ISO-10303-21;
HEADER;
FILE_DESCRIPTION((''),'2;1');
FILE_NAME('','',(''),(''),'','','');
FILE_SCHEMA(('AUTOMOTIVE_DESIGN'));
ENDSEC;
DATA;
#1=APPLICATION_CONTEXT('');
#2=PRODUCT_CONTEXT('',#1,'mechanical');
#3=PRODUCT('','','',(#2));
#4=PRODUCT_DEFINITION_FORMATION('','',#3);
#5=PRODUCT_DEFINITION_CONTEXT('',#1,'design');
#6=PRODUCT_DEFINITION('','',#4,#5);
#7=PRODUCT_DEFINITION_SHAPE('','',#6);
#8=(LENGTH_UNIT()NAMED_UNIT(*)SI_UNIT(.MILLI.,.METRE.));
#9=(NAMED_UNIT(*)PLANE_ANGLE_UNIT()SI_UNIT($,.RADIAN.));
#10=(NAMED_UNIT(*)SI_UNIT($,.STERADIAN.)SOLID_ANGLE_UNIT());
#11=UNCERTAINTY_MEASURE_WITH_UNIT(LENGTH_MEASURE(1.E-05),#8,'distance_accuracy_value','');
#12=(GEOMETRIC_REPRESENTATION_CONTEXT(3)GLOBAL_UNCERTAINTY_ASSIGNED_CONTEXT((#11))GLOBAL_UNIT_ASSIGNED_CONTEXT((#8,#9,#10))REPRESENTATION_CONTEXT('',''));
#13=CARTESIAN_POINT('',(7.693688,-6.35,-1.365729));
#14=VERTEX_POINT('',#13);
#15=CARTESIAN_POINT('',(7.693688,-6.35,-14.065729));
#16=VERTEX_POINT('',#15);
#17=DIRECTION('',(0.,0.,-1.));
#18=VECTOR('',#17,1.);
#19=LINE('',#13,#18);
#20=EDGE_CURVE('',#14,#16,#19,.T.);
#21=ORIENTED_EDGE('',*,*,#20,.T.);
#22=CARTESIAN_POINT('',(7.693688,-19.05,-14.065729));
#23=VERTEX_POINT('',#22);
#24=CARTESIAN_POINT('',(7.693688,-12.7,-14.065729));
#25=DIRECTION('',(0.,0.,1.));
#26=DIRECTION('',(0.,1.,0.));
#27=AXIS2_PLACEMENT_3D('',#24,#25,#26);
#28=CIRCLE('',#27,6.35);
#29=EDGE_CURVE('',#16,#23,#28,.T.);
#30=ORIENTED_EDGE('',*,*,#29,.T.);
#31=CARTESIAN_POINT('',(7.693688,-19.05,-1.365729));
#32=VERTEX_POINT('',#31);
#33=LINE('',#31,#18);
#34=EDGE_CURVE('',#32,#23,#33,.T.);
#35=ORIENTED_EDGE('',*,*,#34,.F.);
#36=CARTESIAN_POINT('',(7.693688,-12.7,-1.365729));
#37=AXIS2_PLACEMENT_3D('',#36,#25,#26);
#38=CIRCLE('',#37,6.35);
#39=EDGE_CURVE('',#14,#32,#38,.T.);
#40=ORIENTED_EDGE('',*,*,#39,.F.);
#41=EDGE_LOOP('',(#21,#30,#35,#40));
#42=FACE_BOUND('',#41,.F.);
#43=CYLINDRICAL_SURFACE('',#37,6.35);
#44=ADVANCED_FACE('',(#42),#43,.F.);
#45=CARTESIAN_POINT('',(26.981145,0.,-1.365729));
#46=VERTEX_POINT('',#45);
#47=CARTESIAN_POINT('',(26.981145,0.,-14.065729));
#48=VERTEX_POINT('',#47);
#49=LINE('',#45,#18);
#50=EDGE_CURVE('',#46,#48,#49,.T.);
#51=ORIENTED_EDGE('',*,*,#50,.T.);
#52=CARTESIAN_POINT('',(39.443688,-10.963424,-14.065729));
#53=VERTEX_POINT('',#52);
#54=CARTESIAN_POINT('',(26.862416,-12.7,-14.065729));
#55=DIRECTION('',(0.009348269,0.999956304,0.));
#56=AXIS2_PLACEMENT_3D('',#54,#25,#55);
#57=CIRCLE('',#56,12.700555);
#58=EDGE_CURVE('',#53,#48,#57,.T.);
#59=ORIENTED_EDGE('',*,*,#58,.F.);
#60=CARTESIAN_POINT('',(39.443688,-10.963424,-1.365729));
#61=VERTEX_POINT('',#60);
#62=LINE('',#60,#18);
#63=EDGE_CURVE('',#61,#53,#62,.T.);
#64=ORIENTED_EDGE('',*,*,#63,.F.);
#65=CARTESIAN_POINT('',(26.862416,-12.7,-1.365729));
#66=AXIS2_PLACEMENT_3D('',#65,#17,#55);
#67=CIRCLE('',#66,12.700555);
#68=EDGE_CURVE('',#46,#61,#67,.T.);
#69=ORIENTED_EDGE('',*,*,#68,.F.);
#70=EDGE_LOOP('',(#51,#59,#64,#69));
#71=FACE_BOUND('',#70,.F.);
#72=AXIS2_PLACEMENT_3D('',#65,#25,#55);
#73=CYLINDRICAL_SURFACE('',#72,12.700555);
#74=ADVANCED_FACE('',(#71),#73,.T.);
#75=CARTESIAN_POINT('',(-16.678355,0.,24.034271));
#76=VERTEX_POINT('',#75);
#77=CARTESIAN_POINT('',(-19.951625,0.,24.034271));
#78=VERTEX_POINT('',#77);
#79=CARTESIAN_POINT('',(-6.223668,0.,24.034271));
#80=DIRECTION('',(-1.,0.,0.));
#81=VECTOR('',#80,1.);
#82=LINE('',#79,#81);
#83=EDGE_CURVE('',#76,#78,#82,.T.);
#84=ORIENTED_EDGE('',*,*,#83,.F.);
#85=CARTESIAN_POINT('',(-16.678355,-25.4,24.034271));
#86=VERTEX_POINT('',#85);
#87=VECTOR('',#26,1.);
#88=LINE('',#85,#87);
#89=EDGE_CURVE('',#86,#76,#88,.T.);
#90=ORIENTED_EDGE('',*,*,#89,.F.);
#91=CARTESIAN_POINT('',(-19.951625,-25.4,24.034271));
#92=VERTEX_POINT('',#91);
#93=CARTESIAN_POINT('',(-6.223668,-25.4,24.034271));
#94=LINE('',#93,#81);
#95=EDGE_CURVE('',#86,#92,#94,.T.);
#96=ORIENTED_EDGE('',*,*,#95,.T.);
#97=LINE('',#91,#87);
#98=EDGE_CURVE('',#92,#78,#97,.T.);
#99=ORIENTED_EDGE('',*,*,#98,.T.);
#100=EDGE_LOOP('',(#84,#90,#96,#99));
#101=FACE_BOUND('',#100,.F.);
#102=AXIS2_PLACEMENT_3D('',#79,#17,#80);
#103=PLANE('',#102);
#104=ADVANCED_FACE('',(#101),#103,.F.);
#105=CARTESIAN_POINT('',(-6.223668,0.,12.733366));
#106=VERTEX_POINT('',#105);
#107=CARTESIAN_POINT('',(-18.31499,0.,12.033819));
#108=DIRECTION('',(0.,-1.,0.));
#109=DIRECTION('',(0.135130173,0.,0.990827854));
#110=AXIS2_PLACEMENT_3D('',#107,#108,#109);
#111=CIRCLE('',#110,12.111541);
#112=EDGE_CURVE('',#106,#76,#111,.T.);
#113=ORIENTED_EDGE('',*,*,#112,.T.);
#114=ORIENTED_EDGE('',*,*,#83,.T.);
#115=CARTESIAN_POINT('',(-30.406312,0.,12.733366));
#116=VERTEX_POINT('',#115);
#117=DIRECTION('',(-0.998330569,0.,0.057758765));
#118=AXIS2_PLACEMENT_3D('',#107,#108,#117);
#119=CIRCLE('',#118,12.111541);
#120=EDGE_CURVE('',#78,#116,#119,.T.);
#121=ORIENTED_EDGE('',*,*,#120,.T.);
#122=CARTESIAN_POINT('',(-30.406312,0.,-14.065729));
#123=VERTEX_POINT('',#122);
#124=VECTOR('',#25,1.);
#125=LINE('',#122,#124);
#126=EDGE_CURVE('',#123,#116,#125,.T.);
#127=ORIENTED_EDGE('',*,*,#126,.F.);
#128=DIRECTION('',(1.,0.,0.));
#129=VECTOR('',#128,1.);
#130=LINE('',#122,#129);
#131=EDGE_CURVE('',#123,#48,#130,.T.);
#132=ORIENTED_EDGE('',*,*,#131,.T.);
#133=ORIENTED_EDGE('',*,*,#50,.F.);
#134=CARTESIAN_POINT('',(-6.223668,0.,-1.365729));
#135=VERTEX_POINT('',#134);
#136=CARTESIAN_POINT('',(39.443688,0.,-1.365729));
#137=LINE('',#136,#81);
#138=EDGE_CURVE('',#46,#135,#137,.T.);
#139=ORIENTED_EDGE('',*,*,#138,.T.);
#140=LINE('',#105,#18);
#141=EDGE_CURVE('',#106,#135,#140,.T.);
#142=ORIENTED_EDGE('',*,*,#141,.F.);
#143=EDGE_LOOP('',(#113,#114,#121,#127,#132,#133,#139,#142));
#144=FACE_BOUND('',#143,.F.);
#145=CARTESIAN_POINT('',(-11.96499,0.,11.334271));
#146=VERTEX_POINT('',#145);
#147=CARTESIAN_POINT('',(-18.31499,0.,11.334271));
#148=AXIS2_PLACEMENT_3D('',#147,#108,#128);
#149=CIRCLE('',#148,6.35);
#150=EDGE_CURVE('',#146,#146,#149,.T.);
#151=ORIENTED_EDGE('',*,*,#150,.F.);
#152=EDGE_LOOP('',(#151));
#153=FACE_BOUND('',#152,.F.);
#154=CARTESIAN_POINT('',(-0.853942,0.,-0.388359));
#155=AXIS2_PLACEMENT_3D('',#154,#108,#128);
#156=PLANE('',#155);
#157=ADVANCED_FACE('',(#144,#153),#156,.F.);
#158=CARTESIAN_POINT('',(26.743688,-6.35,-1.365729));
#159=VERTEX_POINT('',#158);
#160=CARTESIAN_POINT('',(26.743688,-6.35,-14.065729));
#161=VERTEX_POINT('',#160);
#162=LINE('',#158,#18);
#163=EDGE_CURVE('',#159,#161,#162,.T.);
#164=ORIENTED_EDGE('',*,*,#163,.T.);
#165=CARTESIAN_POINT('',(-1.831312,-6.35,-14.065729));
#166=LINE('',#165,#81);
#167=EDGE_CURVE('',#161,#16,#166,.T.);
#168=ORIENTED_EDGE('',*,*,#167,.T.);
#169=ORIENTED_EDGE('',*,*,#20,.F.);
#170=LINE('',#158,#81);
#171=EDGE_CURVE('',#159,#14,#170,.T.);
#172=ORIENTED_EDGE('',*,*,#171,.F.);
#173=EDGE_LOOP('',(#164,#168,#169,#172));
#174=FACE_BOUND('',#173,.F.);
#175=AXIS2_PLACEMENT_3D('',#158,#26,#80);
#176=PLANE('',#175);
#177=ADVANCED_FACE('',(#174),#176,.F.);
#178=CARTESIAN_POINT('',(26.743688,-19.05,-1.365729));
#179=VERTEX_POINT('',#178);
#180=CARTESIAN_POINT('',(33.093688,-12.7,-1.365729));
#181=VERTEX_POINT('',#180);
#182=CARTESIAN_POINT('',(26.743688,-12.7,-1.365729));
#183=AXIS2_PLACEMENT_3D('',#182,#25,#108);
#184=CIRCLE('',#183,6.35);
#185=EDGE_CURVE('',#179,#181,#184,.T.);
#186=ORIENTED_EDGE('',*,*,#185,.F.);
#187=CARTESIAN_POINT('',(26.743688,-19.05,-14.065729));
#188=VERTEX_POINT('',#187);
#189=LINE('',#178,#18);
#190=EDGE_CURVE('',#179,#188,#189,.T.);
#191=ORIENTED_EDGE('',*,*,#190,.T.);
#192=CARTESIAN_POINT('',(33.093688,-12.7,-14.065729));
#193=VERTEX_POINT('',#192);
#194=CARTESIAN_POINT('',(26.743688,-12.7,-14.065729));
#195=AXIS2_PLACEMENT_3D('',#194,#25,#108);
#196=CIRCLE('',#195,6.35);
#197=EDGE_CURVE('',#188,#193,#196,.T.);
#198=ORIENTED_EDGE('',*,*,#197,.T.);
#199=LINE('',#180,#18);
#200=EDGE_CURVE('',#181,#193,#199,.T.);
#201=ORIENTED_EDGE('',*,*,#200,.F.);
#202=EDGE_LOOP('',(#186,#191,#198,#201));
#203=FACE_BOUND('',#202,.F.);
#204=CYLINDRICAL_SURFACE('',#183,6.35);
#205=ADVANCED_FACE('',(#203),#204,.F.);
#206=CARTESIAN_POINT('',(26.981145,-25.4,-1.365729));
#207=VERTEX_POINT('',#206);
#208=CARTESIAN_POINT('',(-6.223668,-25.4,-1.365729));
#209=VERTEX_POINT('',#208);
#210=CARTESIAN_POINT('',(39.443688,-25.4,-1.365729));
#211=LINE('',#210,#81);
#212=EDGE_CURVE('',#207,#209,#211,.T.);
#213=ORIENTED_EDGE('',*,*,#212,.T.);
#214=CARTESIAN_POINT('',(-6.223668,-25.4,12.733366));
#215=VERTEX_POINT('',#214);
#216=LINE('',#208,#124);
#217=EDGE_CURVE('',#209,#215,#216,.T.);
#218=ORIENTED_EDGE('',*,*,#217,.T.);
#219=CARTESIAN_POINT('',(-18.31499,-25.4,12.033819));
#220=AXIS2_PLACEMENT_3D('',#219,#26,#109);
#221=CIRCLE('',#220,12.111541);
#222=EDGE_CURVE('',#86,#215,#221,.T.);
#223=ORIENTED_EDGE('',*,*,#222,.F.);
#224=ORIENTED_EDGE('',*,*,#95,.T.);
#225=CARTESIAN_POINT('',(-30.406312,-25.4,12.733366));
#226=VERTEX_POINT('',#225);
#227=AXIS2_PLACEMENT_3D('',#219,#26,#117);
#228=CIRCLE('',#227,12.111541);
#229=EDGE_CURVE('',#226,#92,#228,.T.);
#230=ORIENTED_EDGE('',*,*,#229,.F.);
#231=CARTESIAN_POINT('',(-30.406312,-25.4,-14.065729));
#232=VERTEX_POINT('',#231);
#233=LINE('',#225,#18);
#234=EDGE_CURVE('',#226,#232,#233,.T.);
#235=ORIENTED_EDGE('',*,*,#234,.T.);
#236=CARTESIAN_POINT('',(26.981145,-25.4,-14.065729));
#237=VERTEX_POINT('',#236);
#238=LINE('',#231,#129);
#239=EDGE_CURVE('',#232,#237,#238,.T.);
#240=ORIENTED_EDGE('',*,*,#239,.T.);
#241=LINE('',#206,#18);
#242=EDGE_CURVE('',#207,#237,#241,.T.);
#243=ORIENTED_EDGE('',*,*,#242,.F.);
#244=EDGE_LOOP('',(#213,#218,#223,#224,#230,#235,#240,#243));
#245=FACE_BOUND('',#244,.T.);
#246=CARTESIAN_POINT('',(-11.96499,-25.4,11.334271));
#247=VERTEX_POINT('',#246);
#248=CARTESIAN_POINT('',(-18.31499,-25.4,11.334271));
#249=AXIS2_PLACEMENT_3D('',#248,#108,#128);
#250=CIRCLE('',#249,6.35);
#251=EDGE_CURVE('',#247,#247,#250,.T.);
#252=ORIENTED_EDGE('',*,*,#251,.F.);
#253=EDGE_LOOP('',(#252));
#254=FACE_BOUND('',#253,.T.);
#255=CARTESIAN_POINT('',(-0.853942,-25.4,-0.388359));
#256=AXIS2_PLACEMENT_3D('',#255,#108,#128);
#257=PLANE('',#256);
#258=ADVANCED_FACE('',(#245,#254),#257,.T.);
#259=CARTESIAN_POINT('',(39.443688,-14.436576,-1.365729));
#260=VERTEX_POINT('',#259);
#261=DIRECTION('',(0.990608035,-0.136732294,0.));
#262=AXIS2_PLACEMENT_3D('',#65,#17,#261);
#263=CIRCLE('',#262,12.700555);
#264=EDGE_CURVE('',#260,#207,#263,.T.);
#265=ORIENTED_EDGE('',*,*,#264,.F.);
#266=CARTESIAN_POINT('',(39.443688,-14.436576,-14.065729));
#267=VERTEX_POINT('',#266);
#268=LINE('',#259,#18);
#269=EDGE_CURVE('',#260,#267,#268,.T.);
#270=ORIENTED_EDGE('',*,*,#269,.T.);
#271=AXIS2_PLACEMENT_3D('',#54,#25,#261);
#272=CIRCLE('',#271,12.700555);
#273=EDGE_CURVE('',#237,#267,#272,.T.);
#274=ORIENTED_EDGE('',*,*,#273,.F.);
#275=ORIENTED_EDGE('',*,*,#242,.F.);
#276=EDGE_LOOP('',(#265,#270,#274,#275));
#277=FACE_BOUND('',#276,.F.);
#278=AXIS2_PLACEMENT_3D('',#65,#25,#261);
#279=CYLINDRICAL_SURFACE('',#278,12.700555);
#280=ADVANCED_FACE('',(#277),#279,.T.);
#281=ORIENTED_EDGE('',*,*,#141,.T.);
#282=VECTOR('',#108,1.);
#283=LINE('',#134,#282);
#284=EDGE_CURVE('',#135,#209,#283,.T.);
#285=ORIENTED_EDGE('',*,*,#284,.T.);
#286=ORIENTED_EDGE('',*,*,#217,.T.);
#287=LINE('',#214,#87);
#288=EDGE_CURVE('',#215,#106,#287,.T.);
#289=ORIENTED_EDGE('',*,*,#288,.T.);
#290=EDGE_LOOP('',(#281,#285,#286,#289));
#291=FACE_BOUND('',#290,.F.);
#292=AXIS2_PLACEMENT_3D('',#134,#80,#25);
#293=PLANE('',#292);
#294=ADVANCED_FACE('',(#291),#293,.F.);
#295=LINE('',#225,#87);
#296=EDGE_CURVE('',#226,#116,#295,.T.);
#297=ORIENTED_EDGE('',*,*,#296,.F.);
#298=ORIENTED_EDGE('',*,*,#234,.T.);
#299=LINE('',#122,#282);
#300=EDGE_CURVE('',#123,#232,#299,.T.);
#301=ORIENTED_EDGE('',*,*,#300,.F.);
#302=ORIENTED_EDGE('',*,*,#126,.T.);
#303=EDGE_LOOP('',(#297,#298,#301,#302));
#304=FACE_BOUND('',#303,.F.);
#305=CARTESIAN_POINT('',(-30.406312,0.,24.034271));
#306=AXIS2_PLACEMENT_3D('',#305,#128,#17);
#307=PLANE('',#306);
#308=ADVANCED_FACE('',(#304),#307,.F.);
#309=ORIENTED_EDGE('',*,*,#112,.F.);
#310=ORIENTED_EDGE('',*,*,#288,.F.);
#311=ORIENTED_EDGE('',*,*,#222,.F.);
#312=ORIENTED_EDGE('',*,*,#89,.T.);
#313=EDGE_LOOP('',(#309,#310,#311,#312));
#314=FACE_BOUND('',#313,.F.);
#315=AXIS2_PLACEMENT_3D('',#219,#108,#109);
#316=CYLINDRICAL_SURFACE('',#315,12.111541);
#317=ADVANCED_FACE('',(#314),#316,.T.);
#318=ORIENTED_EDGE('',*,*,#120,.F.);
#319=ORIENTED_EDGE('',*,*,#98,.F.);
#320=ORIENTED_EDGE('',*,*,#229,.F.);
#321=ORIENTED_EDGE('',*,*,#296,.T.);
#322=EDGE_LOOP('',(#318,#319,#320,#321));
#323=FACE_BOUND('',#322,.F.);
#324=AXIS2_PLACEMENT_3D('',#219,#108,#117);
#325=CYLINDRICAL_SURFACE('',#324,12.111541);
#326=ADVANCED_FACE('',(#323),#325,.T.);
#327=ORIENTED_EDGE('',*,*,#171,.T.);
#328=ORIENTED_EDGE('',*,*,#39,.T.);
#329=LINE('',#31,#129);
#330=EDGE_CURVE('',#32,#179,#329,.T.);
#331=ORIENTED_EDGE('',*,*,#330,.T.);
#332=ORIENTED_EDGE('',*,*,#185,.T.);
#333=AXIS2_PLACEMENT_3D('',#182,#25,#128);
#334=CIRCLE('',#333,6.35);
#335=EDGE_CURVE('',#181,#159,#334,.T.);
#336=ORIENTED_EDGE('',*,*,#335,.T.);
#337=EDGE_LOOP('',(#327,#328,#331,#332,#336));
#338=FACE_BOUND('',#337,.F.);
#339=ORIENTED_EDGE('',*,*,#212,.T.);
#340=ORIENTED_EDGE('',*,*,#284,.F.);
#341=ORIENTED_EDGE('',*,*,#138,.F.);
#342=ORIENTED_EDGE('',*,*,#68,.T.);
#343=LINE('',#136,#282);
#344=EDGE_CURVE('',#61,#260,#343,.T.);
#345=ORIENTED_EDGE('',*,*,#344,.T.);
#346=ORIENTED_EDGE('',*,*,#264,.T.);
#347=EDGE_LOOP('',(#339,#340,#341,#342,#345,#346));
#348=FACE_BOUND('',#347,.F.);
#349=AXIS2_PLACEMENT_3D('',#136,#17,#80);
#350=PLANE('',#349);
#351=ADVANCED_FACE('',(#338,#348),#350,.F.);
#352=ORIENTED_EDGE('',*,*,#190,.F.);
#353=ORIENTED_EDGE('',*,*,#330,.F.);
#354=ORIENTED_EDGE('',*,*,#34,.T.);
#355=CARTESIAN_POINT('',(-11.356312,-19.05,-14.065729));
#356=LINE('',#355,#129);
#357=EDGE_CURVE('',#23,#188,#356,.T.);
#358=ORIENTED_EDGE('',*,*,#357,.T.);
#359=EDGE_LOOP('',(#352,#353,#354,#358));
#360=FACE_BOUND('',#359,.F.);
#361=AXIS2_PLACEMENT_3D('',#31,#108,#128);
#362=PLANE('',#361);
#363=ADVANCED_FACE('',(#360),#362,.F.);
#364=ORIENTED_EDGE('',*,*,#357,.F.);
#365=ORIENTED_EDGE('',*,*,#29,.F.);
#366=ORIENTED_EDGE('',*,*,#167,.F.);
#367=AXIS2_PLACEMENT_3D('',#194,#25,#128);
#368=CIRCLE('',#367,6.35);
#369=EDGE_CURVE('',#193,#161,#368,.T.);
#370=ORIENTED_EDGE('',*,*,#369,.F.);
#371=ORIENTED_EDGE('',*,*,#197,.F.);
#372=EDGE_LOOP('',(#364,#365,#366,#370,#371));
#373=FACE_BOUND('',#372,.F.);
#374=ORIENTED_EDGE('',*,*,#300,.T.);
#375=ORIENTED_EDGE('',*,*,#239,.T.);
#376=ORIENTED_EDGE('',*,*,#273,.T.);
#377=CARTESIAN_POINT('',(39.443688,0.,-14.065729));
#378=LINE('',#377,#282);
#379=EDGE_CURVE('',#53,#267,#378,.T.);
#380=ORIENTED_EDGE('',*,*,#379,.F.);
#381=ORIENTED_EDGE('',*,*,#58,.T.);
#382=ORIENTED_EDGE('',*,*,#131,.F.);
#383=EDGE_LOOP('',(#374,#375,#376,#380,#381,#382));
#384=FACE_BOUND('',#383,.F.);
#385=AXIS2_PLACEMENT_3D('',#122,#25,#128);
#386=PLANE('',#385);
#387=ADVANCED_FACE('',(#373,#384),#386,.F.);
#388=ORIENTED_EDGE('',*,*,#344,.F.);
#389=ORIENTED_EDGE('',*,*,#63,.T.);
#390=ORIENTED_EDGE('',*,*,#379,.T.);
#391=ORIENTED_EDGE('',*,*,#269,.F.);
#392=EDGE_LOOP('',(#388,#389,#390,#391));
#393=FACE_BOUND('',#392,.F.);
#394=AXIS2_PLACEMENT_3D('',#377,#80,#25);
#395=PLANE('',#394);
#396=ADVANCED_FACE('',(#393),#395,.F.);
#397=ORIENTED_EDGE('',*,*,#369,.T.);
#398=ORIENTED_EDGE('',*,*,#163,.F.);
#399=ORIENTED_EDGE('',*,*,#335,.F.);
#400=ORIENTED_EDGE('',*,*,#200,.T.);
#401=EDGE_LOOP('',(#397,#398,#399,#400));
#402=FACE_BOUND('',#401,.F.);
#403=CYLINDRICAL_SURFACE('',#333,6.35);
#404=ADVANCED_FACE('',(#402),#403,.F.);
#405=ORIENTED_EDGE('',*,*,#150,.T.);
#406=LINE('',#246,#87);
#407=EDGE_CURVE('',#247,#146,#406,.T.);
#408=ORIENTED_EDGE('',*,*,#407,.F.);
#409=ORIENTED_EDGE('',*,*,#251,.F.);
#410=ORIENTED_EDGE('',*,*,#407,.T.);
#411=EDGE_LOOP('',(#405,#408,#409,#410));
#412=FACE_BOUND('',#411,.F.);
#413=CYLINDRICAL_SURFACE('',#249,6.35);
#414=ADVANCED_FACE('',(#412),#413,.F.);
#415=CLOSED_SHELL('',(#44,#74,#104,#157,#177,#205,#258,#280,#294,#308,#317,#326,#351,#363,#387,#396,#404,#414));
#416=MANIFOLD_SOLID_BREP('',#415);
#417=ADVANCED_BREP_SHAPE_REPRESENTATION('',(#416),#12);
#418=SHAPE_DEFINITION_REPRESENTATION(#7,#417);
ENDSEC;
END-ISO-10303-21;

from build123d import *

# Parameters (mm, degrees)
F1_DEPTH = 25.4
F3_DEPTH = 25.401
F5_DEPTH = 12.701


with BuildPart() as f1:
    # F0 (on Front) → F1 (new body)
    with BuildSketch(Plane.XZ):
        Polygon((-6.2236683385, 24.0342710525), (-30.4063118957, 24.0342710525), (-30.4063118957, -14.0657289475), (39.4436881043, -14.0657289475), (39.4436881043, -1.3657289475), (-6.2236683385, -1.3657289475), align=None)
    extrude(amount=F1_DEPTH)

    # F2 (on face) → F3 (cut, through all)
    with BuildSketch(Plane.XZ.offset(25.4)):
        with BuildLine():
            ThreePointArc((-24.6649901171, 11.3342710525), (-18.3149901171, 4.9842710525), (-11.9649901171, 11.3342710525))
            Line((-11.9649901171, 11.3342710525), (-24.6649901171, 11.3342710525))
        make_face()
        with BuildLine():
            Line((-24.6649901171, 11.3342710525), (-11.9649901171, 11.3342710525))
            ThreePointArc((-11.9649901171, 11.3342710525), (-18.3149901171, 17.6842710525), (-24.6649901171, 11.3342710525))
        make_face()
        with BuildLine():
            Line((-6.2236683385, 12.7333663785), (-6.2236683385, 11.3342710525))
            ThreePointArc((-6.2236683385, 11.3342710525), (-6.2034489564, 12.0338187155), (-6.2236683385, 12.7333663785))
        make_face()
        with BuildLine():
            ThreePointArc((-16.678355462, 24.0342710525), (-9.4244440948, 20.258636082), (-6.2236683385, 12.7333663785))
            Line((-6.2236683385, 12.7333663785), (-6.2236683385, 24.0342710525))
            Line((-6.2236683385, 24.0342710525), (-16.678355462, 24.0342710525))
        make_face()
        with BuildLine():
            ThreePointArc((-30.4063118957, 12.7333663785), (-30.4265312777, 12.0338187155), (-30.4063118957, 11.3342710525))
            Line((-30.4063118957, 11.3342710525), (-30.4063118957, 12.7333663785))
        make_face()
        with BuildLine():
            Line((-19.9516247721, 24.0342710525), (-16.678355462, 24.0342710525))
            ThreePointArc((-16.678355462, 24.0342710525), (-18.3149901171, 24.1453598762), (-19.9516247721, 24.0342710525))
        make_face()
        with BuildLine():
            Line((-30.4063118957, 24.0342710525), (-30.4063118957, 12.7333663785))
            ThreePointArc((-30.4063118957, 12.7333663785), (-27.2055361393, 20.258636082), (-19.9516247721, 24.0342710525))
            Line((-19.9516247721, 24.0342710525), (-30.4063118957, 24.0342710525))
        make_face()
    extrude(amount=-F3_DEPTH, mode=Mode.SUBTRACT)

    # F4 (on face) → F5 (cut, through all)
    with BuildSketch(Plane.XY.offset(-1.3657289475)):
        with BuildLine():
            ThreePointArc((33.0936881043, -12.7), (31.2338161649, -8.2098719395), (26.7436881043, -6.35))
            Line((26.7436881043, -6.35), (26.7436881043, -19.05))
            ThreePointArc((26.7436881043, -19.05), (31.2338161649, -17.1901280605), (33.0936881043, -12.7))
        make_face()
        with BuildLine():
            Line((26.7436881043, -19.05), (26.7436881043, -6.35))
            ThreePointArc((26.7436881043, -6.35), (20.3936881043, -12.7), (26.7436881043, -19.05))
        make_face()
        with BuildLine():
            ThreePointArc((26.7436881043, -19.05), (20.3936881043, -12.7), (26.7436881043, -6.35))
            Line((26.7436881043, -6.35), (7.6936881043, -6.35))
            ThreePointArc((7.6936881043, -6.35), (12.1838161649, -8.2098719395), (14.0436881043, -12.7))
            ThreePointArc((14.0436881043, -12.7), (12.1838161649, -17.1901280605), (7.6936881043, -19.05))
            Line((7.6936881043, -19.05), (26.7436881043, -19.05))
        make_face()
        with BuildLine():
            Line((39.4436881043, 0), (26.981144502, 0))
            ThreePointArc((26.981144502, 0), (35.251198478, -3.1641502734), (39.4436881043, -10.9634239866))
            Line((39.4436881043, -10.9634239866), (39.4436881043, 0))
        make_face()
        with BuildLine():
            ThreePointArc((14.0436881043, -12.7), (12.1838161649, -8.2098719395), (7.6936881043, -6.35))
            Line((7.6936881043, -6.35), (7.6936881043, -19.05))
            ThreePointArc((7.6936881043, -19.05), (12.1838161649, -17.1901280605), (14.0436881043, -12.7))
        make_face()
        with BuildLine():
            Line((7.6936881043, -19.05), (7.6936881043, -6.35))
            ThreePointArc((7.6936881043, -6.35), (1.3436881043, -12.7), (7.6936881043, -19.05))
        make_face()
        with BuildLine():
            ThreePointArc((39.4436881043, -14.4365760134), (39.5629712668, -12.7), (39.4436881043, -10.9634239866))
            Line((39.4436881043, -10.9634239866), (39.4436881043, -14.4365760134))
        make_face()
        with BuildLine():
            Line((39.4436881043, -25.4), (39.4436881043, -14.4365760134))
            ThreePointArc((39.4436881043, -14.4365760134), (35.251198478, -22.2358497266), (26.981144502, -25.4))
            Line((26.981144502, -25.4), (39.4436881043, -25.4))
        make_face()
    extrude(amount=-F5_DEPTH, mode=Mode.SUBTRACT)


solid = f1.part
